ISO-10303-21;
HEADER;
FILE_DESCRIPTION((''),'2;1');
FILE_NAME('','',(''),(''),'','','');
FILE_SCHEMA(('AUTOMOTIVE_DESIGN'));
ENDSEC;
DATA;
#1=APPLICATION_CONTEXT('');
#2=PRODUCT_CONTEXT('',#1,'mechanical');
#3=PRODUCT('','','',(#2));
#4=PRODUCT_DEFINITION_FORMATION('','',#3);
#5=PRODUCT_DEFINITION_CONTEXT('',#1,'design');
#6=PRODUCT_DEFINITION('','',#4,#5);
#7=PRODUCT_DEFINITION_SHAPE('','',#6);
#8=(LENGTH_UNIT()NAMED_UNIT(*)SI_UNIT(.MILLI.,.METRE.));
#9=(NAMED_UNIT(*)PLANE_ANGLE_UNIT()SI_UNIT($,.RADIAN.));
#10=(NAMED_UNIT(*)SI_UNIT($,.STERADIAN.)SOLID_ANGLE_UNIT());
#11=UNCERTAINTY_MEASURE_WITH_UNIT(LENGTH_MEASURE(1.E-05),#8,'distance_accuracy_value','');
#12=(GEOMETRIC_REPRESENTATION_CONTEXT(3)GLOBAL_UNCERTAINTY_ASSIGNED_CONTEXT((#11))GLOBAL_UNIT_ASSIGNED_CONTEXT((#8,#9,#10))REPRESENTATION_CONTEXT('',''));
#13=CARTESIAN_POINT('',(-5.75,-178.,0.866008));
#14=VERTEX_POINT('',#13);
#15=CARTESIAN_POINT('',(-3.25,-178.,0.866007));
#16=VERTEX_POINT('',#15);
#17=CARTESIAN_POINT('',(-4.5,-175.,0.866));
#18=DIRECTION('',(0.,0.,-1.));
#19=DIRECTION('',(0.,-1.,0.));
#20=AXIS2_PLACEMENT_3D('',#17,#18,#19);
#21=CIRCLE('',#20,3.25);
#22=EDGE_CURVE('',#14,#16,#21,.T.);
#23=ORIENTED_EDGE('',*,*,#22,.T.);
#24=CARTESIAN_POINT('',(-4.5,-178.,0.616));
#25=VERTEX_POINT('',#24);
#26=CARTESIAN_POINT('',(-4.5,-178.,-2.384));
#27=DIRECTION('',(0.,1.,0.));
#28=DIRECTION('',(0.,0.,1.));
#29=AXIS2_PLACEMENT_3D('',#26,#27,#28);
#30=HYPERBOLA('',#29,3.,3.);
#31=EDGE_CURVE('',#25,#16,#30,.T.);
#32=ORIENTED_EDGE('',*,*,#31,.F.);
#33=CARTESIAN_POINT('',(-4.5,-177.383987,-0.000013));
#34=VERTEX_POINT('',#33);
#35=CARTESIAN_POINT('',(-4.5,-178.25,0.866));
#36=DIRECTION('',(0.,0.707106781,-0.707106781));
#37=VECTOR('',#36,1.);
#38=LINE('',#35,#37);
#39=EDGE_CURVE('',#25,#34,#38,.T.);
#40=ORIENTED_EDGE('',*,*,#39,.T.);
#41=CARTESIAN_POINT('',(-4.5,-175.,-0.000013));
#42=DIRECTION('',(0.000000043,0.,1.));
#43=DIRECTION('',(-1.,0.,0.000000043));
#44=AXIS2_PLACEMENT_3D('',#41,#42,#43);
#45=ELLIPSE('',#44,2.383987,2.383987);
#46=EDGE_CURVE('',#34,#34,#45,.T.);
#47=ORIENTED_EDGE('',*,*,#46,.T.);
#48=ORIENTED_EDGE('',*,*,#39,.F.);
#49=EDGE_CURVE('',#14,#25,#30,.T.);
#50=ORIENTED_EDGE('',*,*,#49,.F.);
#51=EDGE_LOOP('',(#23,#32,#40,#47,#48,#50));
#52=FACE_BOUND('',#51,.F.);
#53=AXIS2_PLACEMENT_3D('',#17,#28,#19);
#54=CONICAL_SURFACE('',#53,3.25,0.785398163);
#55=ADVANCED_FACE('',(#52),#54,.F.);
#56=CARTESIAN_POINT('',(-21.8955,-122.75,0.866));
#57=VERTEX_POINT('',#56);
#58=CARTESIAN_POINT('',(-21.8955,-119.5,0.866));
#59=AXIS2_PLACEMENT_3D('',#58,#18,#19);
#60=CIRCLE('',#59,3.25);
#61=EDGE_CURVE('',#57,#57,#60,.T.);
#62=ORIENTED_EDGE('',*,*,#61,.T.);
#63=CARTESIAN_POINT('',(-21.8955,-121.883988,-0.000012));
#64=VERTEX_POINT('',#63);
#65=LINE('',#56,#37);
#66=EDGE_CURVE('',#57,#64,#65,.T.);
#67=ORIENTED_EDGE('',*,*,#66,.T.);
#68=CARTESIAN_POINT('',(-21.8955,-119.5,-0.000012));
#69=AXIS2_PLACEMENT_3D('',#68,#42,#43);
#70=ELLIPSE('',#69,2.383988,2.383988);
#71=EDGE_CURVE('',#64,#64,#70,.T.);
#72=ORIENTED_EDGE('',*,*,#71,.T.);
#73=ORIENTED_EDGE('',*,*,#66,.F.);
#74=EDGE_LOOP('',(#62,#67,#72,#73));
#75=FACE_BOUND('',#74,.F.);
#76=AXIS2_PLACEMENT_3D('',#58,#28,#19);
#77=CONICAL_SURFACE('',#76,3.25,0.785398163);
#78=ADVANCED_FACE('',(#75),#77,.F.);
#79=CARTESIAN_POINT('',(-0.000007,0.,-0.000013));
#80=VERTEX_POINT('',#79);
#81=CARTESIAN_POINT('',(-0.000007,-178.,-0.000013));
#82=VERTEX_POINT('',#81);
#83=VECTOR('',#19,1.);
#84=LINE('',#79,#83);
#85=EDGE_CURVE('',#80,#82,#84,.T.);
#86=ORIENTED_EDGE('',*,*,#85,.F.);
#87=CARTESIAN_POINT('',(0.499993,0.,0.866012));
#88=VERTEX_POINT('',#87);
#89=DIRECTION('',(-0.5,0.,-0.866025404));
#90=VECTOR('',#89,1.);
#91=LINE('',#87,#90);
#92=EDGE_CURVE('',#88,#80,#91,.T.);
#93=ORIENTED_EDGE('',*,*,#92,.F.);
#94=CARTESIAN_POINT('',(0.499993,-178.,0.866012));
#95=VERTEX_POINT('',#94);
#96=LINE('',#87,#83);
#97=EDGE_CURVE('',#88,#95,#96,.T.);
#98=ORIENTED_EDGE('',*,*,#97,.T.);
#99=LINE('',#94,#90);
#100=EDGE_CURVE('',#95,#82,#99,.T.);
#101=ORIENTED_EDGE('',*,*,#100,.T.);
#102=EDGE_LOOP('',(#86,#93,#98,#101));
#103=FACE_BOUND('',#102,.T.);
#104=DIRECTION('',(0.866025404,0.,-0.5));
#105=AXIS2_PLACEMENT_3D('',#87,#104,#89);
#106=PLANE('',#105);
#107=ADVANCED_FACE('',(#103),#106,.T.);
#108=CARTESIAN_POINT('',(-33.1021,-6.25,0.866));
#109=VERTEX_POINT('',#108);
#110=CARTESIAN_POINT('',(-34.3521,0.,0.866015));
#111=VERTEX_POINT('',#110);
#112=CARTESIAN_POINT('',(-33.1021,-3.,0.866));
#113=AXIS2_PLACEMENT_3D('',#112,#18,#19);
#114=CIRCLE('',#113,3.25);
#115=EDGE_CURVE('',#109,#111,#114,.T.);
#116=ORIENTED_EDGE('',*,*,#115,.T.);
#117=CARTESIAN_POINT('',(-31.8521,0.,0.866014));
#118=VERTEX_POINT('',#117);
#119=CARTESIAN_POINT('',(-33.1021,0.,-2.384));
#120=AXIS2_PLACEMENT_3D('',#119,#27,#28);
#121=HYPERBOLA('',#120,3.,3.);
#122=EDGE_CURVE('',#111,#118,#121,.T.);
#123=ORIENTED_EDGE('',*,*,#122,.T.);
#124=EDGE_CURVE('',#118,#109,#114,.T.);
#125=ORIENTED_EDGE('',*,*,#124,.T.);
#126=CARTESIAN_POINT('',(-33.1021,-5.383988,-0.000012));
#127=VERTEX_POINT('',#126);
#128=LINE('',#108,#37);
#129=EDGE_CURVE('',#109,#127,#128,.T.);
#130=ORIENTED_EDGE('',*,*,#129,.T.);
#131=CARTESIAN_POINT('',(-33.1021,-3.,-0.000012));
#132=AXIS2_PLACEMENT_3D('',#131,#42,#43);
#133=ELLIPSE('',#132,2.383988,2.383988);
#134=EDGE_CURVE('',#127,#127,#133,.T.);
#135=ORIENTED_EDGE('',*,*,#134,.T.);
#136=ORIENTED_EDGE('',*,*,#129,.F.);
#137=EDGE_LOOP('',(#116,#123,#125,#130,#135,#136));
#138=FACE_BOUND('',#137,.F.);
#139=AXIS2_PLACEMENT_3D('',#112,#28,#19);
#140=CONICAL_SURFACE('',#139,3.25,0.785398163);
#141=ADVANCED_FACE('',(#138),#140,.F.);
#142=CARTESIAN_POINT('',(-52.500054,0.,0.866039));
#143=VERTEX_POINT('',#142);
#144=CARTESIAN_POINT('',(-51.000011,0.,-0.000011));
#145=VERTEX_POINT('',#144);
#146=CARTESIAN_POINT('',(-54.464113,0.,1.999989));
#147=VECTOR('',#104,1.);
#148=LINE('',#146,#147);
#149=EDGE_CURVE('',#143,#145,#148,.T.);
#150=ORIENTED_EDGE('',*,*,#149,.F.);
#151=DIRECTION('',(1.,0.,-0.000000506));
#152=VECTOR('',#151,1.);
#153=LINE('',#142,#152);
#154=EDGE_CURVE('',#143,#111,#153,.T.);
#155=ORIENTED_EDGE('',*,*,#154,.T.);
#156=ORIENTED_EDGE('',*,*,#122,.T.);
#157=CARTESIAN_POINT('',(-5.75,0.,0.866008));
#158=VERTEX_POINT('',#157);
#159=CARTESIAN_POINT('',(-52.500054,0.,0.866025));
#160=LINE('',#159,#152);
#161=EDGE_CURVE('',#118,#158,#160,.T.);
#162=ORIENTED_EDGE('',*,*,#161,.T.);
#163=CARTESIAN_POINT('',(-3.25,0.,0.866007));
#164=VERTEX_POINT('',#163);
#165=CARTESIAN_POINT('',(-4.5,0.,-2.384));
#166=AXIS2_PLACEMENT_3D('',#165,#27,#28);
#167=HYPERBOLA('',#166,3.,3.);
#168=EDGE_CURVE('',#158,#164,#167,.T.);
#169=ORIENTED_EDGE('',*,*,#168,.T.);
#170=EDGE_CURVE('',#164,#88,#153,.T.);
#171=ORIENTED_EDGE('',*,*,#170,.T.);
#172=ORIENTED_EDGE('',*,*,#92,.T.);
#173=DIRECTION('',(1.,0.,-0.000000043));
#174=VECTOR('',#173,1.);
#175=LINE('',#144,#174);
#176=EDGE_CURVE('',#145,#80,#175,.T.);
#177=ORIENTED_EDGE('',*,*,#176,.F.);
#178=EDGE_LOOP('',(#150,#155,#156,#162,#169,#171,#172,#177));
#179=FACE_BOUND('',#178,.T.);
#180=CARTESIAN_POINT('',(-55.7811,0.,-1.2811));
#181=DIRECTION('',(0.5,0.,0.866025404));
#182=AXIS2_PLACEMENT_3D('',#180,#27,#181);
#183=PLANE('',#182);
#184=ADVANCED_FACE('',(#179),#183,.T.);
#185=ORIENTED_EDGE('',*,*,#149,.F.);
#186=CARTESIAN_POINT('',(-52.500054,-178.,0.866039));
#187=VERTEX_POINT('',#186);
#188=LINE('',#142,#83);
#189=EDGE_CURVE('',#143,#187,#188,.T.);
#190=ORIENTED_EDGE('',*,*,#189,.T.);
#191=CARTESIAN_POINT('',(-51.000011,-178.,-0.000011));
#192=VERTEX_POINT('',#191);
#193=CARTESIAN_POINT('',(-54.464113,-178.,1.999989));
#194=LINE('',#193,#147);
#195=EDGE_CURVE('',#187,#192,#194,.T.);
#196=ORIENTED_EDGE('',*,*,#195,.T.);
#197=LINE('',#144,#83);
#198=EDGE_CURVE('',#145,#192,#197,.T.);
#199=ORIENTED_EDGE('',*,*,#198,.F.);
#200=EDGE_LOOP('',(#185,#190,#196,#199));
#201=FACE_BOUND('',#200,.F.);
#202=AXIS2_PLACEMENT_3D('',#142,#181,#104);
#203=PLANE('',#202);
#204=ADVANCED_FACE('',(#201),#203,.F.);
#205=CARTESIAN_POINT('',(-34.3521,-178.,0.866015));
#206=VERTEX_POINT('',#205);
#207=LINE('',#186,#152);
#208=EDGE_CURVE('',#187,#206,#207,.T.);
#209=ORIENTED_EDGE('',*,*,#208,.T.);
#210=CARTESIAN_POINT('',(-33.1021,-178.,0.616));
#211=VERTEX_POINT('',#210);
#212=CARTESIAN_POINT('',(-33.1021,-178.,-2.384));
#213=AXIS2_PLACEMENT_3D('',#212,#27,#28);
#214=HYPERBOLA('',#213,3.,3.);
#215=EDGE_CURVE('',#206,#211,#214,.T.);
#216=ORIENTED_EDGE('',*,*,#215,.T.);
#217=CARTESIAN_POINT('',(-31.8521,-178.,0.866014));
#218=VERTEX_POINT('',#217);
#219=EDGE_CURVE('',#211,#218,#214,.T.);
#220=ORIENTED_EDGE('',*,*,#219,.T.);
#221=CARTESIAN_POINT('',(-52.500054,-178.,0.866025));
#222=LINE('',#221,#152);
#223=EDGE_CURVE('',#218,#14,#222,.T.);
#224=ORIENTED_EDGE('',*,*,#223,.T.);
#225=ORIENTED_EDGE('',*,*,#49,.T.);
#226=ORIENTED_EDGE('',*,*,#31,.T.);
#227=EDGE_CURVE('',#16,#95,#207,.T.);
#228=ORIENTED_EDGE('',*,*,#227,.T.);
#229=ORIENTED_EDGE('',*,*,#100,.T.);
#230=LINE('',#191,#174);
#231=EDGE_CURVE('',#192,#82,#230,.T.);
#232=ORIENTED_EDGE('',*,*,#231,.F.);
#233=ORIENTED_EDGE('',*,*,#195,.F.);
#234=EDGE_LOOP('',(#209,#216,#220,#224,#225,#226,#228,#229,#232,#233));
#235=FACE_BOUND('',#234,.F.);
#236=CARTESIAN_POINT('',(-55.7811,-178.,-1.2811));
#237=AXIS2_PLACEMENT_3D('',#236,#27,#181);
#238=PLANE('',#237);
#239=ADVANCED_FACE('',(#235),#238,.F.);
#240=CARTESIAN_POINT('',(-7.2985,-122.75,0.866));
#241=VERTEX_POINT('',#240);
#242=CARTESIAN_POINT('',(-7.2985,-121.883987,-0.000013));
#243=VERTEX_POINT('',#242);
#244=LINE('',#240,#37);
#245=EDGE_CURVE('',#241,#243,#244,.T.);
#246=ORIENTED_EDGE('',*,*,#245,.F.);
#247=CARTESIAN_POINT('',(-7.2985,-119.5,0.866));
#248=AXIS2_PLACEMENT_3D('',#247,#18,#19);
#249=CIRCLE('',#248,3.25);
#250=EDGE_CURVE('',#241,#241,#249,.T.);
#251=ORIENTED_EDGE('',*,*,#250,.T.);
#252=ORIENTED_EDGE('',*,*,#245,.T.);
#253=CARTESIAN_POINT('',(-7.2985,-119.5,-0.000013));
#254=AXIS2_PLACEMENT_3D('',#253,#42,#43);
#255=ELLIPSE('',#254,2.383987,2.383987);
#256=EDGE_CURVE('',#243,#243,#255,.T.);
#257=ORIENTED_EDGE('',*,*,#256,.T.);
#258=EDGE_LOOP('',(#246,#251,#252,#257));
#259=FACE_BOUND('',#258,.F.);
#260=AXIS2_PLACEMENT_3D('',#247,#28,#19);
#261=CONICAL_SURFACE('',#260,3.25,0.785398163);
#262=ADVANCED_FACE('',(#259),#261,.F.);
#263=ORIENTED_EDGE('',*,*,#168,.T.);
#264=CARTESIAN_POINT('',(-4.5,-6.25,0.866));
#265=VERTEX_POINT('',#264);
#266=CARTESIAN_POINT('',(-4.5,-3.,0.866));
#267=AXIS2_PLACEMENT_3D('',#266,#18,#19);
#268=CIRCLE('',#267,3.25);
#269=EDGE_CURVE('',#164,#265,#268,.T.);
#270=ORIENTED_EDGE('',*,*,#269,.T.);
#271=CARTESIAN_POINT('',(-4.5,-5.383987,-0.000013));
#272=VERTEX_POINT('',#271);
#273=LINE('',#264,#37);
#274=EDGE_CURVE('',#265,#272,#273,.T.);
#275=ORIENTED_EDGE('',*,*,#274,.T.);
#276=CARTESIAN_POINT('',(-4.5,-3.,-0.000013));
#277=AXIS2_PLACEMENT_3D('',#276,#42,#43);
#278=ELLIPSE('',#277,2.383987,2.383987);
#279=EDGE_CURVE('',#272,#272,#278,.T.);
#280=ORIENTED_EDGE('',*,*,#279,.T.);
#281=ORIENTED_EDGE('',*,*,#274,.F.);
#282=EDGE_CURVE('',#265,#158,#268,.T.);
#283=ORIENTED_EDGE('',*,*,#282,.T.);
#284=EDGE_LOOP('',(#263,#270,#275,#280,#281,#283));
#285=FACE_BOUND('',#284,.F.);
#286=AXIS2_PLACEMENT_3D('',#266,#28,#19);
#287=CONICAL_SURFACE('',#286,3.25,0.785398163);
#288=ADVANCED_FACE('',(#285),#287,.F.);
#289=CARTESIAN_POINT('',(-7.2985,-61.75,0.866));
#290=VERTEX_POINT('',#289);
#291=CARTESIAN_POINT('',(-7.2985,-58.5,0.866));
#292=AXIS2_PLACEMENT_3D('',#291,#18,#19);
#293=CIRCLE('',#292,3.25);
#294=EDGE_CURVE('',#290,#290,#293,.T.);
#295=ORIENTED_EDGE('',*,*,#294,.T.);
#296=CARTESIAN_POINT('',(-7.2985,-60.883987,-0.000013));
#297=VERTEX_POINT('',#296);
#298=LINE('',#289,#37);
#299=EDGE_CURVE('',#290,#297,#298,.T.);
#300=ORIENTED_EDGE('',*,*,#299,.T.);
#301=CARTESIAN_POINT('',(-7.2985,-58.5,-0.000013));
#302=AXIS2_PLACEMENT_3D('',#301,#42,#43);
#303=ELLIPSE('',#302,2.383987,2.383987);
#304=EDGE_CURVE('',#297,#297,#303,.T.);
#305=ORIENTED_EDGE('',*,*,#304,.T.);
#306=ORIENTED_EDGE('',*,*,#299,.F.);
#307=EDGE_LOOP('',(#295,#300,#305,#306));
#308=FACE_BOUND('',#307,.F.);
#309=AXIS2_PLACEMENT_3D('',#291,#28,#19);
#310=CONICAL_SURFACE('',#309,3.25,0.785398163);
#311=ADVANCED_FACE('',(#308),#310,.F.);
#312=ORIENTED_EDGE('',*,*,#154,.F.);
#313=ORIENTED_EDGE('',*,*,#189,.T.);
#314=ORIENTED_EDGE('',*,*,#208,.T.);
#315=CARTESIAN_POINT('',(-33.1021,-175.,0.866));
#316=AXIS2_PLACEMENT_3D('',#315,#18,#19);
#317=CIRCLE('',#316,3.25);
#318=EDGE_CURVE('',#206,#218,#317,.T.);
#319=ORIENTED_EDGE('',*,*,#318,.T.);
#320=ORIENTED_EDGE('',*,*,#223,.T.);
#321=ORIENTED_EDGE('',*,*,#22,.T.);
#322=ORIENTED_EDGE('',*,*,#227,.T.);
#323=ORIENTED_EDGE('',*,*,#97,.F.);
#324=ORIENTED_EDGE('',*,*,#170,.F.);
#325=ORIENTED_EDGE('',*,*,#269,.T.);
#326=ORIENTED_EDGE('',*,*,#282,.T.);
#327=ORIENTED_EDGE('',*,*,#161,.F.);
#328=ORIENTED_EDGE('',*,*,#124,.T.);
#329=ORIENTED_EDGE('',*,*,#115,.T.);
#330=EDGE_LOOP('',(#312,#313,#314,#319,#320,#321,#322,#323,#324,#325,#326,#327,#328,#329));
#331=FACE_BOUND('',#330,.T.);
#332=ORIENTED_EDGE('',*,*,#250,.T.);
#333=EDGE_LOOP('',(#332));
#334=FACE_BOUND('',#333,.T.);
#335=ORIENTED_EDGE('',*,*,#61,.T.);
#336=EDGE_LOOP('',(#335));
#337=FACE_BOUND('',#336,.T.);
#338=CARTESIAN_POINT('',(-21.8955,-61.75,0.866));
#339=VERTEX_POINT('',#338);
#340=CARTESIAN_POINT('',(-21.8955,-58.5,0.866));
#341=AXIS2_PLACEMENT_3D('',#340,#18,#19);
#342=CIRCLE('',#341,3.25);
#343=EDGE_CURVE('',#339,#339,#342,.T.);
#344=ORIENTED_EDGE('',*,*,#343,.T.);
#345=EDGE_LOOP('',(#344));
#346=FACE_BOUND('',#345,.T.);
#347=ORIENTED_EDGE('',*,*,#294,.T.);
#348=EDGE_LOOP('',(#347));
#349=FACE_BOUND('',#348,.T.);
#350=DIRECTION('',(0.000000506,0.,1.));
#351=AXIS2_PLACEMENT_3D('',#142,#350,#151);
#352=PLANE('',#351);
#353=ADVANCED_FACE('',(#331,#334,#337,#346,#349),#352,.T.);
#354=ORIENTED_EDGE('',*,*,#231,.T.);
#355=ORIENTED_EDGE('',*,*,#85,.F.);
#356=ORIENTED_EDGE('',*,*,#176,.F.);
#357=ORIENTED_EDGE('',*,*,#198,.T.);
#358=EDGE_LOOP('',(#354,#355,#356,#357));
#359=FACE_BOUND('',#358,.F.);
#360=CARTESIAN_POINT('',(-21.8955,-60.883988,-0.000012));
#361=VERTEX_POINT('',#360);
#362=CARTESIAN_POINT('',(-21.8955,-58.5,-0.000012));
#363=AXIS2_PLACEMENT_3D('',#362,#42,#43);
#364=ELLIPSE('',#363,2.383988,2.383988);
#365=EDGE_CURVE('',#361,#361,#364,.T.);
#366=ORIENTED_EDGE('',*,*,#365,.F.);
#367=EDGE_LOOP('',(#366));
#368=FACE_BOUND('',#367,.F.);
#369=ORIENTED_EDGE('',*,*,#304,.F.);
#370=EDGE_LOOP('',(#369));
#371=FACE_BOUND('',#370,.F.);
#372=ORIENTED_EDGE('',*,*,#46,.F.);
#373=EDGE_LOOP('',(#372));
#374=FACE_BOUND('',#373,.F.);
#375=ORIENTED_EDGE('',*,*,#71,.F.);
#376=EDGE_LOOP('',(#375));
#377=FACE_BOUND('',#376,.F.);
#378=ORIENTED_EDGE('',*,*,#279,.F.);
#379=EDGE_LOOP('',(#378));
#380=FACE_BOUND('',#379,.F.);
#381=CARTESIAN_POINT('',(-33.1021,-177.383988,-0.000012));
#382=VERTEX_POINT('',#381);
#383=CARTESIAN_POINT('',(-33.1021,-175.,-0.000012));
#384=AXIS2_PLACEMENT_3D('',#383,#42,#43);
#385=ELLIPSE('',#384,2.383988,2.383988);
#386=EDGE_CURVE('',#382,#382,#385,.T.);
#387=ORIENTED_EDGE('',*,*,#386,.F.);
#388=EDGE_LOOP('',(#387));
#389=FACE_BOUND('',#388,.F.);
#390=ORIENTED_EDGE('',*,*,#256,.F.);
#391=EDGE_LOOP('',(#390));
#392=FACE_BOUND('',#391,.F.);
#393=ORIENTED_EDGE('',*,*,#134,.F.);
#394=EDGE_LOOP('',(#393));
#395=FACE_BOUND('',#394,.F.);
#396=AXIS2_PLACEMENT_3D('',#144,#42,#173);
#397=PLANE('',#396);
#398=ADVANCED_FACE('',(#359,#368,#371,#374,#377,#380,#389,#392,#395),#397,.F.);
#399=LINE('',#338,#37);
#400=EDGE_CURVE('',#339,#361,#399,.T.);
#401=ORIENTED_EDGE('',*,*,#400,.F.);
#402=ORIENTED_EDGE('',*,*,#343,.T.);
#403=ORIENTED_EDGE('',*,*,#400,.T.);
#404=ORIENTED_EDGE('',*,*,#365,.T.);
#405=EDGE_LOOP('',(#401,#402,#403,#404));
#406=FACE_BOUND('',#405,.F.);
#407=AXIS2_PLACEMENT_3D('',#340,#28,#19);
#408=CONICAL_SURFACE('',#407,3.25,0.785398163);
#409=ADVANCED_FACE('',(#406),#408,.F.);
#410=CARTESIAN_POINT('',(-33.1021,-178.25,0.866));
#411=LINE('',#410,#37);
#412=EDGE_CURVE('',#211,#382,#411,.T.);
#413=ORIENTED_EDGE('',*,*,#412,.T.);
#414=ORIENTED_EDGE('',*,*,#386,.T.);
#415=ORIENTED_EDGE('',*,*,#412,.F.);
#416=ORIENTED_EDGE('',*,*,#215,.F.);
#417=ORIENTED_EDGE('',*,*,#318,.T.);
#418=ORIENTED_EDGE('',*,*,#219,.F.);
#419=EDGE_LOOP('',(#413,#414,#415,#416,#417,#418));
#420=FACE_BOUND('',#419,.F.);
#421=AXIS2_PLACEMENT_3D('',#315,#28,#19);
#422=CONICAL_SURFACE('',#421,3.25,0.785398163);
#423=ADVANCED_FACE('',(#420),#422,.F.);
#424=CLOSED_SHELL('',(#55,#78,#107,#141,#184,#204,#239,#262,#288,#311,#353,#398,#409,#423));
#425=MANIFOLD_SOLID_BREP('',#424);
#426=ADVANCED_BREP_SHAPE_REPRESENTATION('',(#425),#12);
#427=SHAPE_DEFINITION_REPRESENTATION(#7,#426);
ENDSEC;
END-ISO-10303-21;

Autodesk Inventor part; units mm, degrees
ref_plane "YZ Plane" through (0, 0, 0) normal (1, 0, 0) x (0, 1, 0)
ref_plane "Work Plane1" through (14.6553, 0, -25.7817) normal (0, 1, 0) x (-0.8660254, 0, 0.5)
ref_plane "Work Plane2" through (-53.25, -178, -67.8971) normal (0, -1, 0) x (0.8660254, 0, -0.5)
ref_plane "Work Plane3" through (14.6553, 0, -25.7817) normal (0, 1, 0) x (-0.8660254, 0, 0.5)
ref_plane "Work Plane4" through (-55.7811, 0, -1.2811) normal (0, 1, 0) x (0.5, 0, 0.8660254)
sketch "Sketch4" plane through (-55.7811, 0, -1.2811) normal (0, 1, 0) x (0.5, 0, 0.8660254)
  line L0 (3.5, 3.5) -> (-1, 3.5) projected
  line L1 (-1, 3.5) -> (-1, -0.5) projected
  line L2 (-1, -0.5) -> (-4.5, -0.5) projected
  line L3 (-4.5, -0.5) -> (-4.5, -14.5) projected
  line L4 (-4.5, -14.5) -> (4.5, -0.5) projected
  line L5 (4.5, -0.5) -> (3.5, -0.5) projected
  line L6 (3.5, -0.5) -> (3.5, 3.5) projected
  line L7 (3.5, 3.5) -> (29, 47.6673) projected
  line L8 (29, 47.6673) -> (3.5, 3.5)
  line L9 (3.5, 1.7679) -> (30, 47.6673)
  line L10 (30, 47.6673) -> (29, 47.6673)
  point P0 (29, 47.6673)
  dimension "d10" = 1
ref_plane "Work Plane5" through (-46.3218, -178, -67.8971) normal (0, -1, 0) x (0.8660254, 0, -0.5)
extrude "Extrusion2" add sketch "Sketch4" against normal up to surface (178 mm away) contours L7 L10 L9 L6
sketch "Sketch5" plane through (-52.5, 0, 0.866) normal (0, 0, 1) x (1, 0, 0)
  circle A0 centre (30.6045, -58.5) radius 2.3 projected
  circle A1 centre (45.2015, -58.5) radius 2.3 projected
  circle A2 centre (30.6045, -119.5) radius 2.3 projected
  circle A3 centre (45.2015, -119.5) radius 2.3 projected
  circle A4 centre (48, -3) radius 2 projected
  circle A5 centre (19.3979, -3) radius 2 projected
  circle A6 centre (48, -175) radius 2 projected
  circle A7 centre (19.3979, -175) radius 2 projected
  point P0 (52.5, 0)
hole "Hole2" at (-7.2985, -58.5, 0.866) at (-21.8955, -58.5, 0.866) at (-7.2985, -119.5, 0.866) at (-21.8955, -119.5, 0.866) at (-4.5, -3, 0.866) at (-33.1021, -3, 0.866) at (-4.5, -175, 0.866) at (-33.1021, -175, 0.866) direction (0, 0, -1) diameter 3.6 end through all countersink diameter 6.5 countersink angle 90 clearance for "Countersunk Flat Head Screw ISO 2009/7046" size "M3" standard "ISO"
properties part number "frobt" material "Nylon 6/6"
